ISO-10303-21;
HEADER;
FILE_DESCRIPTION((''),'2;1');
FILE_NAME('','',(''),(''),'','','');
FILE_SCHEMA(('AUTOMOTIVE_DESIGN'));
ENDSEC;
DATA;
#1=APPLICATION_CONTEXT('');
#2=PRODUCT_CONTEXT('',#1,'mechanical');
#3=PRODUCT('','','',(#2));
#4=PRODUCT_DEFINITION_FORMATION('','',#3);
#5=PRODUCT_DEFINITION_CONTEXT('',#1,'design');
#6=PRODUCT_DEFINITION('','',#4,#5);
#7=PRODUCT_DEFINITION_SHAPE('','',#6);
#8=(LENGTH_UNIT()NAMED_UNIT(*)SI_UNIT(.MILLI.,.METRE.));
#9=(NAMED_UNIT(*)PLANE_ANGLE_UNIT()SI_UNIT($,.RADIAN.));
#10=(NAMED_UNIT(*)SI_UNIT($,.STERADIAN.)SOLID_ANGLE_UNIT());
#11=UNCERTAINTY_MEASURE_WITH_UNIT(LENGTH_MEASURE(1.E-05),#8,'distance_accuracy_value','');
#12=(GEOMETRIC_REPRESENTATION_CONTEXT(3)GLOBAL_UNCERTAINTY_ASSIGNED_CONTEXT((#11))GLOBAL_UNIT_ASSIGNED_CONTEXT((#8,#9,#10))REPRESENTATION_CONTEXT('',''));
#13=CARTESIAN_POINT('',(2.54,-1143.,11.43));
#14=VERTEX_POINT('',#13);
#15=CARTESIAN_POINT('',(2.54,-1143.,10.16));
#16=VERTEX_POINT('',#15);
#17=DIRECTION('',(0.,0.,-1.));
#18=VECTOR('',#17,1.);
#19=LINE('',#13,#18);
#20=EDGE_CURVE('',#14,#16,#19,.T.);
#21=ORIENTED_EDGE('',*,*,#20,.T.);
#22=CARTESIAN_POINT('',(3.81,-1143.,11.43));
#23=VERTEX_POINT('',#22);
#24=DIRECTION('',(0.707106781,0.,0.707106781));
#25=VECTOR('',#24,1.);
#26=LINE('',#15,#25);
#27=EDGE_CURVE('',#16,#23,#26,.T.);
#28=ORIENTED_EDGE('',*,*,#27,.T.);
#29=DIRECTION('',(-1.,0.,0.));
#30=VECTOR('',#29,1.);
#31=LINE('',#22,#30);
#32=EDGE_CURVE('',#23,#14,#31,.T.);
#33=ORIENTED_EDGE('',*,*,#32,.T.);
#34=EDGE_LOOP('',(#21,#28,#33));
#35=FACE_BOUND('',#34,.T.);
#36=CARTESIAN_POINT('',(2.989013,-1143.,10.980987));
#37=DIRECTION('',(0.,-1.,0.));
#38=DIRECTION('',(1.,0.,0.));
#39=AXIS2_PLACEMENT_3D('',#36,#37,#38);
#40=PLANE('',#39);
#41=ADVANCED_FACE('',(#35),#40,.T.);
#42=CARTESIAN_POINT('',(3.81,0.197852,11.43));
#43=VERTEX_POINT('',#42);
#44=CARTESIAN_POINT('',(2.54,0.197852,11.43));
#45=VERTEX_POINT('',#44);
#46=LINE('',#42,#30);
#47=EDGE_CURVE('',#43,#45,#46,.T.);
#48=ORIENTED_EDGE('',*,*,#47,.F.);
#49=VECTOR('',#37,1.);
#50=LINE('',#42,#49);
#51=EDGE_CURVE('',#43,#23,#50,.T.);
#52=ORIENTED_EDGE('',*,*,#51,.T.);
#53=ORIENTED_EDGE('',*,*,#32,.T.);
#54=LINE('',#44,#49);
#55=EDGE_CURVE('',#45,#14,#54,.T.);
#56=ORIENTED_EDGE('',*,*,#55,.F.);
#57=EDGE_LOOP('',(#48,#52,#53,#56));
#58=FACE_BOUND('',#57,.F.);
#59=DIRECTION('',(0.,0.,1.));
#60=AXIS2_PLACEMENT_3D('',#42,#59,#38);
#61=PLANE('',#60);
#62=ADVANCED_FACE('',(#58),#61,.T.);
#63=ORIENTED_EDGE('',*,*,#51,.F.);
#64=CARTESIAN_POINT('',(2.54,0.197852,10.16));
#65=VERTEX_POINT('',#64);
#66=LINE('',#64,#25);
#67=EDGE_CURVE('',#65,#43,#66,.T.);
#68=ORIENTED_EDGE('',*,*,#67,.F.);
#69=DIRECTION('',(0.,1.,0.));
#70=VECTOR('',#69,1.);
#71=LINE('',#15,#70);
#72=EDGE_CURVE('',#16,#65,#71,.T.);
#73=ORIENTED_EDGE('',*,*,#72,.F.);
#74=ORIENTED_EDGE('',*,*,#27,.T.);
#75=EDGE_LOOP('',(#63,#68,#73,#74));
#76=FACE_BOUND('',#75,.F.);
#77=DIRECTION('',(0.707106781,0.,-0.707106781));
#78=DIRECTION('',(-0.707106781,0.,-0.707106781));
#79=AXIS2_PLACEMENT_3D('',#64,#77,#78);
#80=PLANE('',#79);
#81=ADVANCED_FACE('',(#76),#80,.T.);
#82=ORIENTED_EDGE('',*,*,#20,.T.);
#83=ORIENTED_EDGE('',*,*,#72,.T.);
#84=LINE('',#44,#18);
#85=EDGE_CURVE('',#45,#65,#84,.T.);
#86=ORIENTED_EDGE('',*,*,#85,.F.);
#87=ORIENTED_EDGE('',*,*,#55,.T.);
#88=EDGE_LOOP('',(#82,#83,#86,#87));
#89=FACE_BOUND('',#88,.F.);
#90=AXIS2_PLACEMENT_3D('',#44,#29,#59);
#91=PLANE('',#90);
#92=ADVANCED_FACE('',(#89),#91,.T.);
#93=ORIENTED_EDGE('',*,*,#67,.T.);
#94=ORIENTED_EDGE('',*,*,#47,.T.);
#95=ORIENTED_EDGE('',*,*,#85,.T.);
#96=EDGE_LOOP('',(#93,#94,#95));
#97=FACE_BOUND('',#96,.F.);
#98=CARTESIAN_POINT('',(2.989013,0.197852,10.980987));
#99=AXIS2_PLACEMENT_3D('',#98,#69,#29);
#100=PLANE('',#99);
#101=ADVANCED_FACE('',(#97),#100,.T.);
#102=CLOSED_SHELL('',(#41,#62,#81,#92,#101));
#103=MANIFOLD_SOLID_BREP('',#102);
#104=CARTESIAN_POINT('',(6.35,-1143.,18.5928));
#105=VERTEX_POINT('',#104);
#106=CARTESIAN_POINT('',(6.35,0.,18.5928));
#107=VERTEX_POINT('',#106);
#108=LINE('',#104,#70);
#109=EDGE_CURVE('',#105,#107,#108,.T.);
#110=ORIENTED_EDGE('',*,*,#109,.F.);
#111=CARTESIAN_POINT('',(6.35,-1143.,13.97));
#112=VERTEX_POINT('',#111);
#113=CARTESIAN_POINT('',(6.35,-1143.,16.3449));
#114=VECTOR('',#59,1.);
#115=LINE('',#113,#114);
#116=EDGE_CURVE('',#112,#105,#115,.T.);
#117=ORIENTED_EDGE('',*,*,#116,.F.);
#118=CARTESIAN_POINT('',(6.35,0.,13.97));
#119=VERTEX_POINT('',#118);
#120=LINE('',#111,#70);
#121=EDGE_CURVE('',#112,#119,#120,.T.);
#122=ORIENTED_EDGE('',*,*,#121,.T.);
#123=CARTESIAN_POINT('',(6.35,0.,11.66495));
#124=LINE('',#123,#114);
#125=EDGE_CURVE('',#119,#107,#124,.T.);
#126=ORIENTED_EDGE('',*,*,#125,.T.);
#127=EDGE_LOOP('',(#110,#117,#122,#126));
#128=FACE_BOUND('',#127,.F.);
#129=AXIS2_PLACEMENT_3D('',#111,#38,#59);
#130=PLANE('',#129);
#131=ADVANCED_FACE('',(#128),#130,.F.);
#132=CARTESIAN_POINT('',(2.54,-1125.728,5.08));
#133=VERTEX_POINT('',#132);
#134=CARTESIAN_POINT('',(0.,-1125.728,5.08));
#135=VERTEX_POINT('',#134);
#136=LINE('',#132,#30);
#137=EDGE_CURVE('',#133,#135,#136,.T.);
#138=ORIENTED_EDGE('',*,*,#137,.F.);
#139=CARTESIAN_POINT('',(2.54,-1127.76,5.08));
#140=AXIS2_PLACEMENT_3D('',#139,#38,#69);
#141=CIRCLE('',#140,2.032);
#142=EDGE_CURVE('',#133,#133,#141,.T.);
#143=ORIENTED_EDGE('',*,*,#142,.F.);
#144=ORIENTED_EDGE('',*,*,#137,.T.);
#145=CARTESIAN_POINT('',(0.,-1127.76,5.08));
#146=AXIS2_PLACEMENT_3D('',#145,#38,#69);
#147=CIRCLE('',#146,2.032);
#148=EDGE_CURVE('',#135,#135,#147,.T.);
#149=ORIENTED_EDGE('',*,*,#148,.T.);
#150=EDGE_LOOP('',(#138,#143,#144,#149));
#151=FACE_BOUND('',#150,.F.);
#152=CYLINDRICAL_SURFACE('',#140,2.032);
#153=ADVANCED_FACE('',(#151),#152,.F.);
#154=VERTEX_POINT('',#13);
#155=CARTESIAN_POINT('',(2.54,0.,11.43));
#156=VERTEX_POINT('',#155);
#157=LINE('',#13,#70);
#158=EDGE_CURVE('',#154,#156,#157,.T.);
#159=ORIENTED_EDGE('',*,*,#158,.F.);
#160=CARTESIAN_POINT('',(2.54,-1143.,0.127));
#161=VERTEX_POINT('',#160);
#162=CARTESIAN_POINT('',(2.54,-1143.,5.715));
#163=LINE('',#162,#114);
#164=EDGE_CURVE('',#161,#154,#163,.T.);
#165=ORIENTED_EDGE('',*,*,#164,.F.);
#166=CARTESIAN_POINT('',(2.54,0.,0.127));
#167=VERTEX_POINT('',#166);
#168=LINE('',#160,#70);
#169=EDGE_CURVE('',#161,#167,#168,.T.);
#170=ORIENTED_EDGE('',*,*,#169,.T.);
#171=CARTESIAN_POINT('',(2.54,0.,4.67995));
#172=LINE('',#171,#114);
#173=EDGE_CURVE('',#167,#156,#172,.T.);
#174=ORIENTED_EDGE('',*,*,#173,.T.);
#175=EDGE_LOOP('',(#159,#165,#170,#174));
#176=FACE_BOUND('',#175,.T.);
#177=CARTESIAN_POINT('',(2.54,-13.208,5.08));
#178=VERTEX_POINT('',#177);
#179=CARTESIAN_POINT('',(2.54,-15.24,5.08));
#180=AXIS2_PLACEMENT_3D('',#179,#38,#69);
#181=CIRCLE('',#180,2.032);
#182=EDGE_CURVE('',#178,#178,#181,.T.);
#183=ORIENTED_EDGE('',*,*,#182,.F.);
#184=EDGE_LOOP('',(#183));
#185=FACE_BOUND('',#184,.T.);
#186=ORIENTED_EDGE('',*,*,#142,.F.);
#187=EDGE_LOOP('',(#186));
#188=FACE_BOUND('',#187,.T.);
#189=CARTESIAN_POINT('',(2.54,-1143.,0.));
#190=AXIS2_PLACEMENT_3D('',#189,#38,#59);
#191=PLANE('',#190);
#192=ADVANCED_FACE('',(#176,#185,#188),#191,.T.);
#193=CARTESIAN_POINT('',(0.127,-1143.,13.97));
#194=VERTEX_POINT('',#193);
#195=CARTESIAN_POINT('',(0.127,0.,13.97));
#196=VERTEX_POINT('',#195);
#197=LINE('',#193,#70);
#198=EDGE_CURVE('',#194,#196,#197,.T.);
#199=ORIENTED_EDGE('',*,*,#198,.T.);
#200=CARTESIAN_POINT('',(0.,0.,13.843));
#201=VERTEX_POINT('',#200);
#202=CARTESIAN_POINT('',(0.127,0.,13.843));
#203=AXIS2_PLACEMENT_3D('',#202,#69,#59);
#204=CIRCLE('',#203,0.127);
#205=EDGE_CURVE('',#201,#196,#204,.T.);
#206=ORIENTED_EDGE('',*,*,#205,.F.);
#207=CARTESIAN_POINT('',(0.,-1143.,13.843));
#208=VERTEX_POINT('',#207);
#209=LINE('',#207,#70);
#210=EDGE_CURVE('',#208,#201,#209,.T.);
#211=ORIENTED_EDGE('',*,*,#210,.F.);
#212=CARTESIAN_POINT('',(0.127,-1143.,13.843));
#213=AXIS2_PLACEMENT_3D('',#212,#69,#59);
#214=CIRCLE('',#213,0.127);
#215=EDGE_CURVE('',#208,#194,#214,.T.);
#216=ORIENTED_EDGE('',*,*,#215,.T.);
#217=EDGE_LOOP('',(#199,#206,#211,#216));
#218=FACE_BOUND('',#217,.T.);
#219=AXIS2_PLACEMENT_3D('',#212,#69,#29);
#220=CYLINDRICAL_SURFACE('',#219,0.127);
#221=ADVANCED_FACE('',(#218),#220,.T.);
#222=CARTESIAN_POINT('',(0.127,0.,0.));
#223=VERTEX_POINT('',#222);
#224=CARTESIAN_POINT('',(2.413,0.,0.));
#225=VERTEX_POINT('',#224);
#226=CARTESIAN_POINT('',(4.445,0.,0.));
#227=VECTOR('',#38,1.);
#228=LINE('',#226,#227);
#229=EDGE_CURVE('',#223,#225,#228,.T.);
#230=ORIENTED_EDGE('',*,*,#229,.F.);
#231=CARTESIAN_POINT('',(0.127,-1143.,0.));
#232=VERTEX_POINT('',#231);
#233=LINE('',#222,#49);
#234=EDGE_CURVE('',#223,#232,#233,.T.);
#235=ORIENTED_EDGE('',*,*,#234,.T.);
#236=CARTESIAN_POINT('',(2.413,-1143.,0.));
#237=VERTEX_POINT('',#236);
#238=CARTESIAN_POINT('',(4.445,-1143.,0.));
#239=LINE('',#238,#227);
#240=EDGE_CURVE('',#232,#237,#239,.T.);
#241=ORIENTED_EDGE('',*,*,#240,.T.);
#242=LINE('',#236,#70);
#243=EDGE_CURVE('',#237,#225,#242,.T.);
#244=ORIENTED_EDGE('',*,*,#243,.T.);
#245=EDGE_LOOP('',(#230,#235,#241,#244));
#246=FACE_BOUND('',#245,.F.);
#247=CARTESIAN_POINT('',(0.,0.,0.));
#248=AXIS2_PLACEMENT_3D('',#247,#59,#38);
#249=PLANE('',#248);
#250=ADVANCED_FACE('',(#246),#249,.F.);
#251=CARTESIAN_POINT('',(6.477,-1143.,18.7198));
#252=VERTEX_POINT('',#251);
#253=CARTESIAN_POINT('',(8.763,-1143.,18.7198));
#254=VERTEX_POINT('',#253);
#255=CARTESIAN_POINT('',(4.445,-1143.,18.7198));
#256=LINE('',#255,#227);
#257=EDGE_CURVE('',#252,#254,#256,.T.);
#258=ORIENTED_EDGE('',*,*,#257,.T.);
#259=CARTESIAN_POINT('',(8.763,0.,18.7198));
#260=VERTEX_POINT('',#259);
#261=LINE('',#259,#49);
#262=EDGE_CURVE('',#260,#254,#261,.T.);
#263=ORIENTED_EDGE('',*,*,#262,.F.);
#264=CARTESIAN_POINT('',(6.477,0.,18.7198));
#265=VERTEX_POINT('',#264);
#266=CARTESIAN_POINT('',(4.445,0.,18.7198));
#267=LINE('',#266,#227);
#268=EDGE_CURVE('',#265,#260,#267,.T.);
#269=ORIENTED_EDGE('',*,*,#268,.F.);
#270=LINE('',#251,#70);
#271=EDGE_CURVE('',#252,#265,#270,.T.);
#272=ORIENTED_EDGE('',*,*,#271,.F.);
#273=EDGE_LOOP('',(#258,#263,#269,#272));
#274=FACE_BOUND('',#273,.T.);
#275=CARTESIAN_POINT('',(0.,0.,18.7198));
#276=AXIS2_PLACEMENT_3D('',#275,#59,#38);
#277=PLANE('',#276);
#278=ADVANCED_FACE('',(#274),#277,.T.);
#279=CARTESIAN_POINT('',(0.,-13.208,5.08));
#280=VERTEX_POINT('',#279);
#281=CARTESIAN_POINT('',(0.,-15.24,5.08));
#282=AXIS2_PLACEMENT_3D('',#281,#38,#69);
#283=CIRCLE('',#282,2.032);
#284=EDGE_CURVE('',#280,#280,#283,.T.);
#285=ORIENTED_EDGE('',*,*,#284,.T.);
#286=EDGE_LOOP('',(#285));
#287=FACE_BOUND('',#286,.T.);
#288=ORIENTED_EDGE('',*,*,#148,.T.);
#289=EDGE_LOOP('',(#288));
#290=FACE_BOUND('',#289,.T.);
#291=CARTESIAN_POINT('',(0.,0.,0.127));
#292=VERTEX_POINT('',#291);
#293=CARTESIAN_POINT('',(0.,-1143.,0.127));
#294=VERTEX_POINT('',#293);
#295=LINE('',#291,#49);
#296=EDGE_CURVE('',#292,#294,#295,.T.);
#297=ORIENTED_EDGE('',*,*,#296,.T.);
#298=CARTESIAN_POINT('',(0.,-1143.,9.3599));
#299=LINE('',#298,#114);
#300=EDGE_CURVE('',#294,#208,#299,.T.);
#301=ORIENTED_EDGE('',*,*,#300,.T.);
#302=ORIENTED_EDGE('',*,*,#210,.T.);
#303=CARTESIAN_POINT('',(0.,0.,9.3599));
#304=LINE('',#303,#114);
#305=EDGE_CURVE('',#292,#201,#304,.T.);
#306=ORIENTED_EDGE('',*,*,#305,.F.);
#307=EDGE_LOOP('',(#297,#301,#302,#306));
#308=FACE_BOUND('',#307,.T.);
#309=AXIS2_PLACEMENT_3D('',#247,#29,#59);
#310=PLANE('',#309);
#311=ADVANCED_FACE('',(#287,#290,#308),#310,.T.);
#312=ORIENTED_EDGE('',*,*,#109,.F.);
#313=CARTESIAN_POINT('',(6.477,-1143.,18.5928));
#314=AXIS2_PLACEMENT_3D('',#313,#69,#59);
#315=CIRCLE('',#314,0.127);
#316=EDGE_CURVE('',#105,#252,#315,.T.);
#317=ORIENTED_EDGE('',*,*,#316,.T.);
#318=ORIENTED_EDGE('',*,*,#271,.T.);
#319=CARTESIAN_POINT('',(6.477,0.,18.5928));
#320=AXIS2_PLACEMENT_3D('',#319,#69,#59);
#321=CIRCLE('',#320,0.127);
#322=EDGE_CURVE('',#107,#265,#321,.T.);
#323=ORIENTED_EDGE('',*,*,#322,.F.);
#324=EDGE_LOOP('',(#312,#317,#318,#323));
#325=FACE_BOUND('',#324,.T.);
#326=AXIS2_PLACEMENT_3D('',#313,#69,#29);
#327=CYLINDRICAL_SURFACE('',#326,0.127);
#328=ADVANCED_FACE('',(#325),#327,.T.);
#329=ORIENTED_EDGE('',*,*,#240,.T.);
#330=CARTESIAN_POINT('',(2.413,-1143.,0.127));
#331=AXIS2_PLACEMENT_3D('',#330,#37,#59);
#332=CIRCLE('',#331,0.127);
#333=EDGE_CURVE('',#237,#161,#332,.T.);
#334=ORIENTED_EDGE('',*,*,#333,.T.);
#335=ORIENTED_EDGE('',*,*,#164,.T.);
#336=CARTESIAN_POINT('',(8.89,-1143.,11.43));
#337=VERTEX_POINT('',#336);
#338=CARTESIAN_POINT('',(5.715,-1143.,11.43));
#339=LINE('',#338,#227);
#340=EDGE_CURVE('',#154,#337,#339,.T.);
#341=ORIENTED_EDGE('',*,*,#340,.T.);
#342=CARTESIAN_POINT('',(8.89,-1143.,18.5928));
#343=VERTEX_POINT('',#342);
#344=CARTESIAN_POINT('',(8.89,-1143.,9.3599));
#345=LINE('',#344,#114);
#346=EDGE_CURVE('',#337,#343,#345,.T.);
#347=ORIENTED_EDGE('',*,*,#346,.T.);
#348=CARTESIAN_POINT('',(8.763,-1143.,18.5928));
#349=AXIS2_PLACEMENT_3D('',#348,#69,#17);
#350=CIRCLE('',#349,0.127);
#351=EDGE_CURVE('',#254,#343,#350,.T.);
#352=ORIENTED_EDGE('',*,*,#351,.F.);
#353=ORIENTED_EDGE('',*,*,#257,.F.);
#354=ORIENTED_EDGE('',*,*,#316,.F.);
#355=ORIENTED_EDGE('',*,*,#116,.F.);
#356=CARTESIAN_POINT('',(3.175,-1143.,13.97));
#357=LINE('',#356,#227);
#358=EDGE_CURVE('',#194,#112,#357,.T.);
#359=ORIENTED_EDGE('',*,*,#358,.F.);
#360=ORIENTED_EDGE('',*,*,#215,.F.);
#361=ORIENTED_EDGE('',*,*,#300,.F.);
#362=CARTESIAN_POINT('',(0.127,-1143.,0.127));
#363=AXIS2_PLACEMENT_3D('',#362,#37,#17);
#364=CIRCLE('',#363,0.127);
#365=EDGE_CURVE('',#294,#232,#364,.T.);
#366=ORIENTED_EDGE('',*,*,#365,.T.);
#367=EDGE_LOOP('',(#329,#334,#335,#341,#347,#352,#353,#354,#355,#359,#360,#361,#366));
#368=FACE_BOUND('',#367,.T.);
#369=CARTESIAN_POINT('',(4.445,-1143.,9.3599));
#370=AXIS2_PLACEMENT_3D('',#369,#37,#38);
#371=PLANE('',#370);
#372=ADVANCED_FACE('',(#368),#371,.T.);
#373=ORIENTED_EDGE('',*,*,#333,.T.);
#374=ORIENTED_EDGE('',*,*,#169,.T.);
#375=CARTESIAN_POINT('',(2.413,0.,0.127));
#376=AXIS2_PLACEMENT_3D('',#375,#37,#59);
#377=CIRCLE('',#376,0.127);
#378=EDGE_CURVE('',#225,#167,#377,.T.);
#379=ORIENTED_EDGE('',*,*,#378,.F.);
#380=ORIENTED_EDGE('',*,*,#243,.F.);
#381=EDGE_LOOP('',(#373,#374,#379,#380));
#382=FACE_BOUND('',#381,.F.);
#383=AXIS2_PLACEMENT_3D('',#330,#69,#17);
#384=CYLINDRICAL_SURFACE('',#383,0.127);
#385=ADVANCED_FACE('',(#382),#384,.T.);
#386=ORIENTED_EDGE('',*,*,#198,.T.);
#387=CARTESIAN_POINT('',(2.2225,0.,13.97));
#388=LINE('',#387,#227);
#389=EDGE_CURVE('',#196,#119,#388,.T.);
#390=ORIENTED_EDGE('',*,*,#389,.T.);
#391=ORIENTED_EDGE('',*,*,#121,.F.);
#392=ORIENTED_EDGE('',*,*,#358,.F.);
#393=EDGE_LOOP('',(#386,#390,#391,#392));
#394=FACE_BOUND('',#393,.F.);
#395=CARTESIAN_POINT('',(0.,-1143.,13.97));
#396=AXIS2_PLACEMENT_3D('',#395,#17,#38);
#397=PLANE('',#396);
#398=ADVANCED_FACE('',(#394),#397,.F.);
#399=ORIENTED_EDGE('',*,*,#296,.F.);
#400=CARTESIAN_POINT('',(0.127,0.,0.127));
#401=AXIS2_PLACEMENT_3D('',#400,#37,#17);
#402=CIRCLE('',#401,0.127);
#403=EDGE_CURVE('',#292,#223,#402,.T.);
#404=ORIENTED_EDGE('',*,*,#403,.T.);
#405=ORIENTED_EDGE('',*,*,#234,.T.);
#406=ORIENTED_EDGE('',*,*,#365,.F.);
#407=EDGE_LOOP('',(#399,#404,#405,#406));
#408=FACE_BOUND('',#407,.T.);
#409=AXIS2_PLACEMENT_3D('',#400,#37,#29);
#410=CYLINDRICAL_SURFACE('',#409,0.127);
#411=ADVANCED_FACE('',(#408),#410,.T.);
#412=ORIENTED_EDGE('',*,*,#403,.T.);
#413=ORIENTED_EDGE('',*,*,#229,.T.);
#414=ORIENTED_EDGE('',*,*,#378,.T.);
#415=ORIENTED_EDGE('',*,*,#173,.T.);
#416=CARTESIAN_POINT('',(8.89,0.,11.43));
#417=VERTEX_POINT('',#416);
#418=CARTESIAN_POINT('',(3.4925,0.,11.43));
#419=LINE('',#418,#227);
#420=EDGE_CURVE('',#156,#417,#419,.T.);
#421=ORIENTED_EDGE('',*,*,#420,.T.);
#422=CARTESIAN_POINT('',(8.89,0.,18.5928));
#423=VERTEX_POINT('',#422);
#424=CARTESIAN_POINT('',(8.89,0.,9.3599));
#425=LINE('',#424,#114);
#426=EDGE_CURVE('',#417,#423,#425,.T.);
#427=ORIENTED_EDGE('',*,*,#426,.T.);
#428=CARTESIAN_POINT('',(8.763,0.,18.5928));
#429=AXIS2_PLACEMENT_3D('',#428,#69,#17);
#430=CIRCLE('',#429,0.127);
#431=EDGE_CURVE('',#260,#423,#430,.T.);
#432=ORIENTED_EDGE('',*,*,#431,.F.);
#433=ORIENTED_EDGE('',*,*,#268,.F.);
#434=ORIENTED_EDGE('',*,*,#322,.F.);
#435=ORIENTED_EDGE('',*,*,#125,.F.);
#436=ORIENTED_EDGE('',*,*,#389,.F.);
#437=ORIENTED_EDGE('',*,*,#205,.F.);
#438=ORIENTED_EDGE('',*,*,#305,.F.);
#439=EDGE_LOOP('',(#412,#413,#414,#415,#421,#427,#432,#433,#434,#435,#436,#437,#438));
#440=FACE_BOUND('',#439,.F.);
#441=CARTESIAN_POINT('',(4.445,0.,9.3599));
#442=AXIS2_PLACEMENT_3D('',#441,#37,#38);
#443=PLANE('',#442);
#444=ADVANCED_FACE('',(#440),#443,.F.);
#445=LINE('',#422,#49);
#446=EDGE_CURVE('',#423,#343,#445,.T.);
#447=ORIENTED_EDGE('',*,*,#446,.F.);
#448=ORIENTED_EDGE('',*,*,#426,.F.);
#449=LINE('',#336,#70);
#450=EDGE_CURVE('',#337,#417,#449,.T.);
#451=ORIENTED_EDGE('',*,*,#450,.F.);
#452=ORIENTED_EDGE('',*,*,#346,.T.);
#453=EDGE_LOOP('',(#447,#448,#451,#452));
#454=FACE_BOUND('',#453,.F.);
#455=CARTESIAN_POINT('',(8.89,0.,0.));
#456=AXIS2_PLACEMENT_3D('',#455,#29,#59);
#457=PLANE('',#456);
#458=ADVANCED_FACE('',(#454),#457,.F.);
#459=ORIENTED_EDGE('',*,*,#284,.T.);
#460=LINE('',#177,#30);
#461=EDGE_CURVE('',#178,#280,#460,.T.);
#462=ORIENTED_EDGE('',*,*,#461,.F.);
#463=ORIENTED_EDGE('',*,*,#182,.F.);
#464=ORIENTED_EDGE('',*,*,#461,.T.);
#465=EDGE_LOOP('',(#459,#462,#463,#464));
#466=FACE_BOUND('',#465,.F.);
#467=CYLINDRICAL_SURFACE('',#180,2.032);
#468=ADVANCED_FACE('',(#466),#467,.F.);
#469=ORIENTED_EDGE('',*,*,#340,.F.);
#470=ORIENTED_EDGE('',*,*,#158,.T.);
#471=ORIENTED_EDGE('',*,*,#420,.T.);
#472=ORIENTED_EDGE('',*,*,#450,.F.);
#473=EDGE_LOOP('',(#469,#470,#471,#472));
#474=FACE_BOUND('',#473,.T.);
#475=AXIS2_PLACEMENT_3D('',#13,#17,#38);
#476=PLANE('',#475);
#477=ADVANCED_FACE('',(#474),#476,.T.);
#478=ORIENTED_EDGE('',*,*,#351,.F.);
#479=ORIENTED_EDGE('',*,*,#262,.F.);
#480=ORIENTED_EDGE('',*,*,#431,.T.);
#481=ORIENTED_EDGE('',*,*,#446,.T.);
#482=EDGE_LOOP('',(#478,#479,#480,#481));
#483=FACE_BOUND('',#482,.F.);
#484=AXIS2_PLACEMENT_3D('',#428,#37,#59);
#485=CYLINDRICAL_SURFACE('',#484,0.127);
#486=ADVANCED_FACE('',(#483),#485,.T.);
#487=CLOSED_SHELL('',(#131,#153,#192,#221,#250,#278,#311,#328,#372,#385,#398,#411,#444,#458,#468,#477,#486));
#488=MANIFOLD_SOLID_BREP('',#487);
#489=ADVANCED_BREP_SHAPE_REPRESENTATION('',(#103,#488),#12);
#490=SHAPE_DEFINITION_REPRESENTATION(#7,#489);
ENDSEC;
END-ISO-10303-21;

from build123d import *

# Parameters (mm, degrees)
F0_W     = 8.89
F0_H     = 18.7198
F1_DEPTH = 1143
F2_W     = 6.35
F2_H     = 4.7498
F2_H_2   = 11.43
F3_DEPTH = 1143.001
F4_R     = 0.127
F6_DEPTH = 1143.001
F7_R     = 2.032
F8_DEPTH = 2.54


# Not quite as in the source:
# - a pattern or mirror of a feature is missing from the dataset's text; its kind, count and spacing are read off the source's solid


with BuildPart() as f1:
    # F0 (on Front) → F1 (new body)
    with BuildSketch(Plane.XZ):
        with Locations((4.445, 9.3599)):
            Rectangle(F0_W, F0_H)
    extrude(amount=F1_DEPTH)

    # F2 (on face) → F3 (cut, through all)
    with BuildSketch(Plane.XZ.offset(1143)):
        with Locations((3.175, 16.3449)):
            Rectangle(F2_W, F2_H)
        with Locations((5.715, 5.715)):
            Rectangle(F2_W, F2_H_2)
    extrude(amount=-F3_DEPTH, mode=Mode.SUBTRACT)

    # F4
    f4_edges = [f1.edges().sort_by_distance(p)[0] for p in [
        (6.35, -571.5, 18.7198),
        (8.89, -571.5, 18.7198),
        (2.54, -571.5, 0),
        (0, -571.5, 0),
        (0, -571.5, 13.97),
    ]]
    fillet(f4_edges, radius=F4_R)

    # F7 (on face) → F8 (cut, through all)
    with BuildSketch(Plane.YZ.offset(2.54)):
        with Locations((-1127.76, 5.08)):
            Circle(F7_R)
        with Locations((-15.24, 5.08)):
            Circle(F7_R)
    extrude(amount=-F8_DEPTH, mode=Mode.SUBTRACT)


with BuildPart() as f6:
    # F5 (on face) → F6 (new body, through all)
    with BuildSketch(Plane.XZ.offset(1143)):
        Polygon((2.54, 10.16), (3.81, 11.43), (2.54, 11.43), align=None)
    extrude(amount=-F6_DEPTH)

    # F6_copies: F6 across plane


with BuildPart() as f6_1:
    add(f6.part)
    add(f6.part.mirror(Plane.ZX.offset(-571.401074)))


solid = Compound([f1.part, f6_1.part])
